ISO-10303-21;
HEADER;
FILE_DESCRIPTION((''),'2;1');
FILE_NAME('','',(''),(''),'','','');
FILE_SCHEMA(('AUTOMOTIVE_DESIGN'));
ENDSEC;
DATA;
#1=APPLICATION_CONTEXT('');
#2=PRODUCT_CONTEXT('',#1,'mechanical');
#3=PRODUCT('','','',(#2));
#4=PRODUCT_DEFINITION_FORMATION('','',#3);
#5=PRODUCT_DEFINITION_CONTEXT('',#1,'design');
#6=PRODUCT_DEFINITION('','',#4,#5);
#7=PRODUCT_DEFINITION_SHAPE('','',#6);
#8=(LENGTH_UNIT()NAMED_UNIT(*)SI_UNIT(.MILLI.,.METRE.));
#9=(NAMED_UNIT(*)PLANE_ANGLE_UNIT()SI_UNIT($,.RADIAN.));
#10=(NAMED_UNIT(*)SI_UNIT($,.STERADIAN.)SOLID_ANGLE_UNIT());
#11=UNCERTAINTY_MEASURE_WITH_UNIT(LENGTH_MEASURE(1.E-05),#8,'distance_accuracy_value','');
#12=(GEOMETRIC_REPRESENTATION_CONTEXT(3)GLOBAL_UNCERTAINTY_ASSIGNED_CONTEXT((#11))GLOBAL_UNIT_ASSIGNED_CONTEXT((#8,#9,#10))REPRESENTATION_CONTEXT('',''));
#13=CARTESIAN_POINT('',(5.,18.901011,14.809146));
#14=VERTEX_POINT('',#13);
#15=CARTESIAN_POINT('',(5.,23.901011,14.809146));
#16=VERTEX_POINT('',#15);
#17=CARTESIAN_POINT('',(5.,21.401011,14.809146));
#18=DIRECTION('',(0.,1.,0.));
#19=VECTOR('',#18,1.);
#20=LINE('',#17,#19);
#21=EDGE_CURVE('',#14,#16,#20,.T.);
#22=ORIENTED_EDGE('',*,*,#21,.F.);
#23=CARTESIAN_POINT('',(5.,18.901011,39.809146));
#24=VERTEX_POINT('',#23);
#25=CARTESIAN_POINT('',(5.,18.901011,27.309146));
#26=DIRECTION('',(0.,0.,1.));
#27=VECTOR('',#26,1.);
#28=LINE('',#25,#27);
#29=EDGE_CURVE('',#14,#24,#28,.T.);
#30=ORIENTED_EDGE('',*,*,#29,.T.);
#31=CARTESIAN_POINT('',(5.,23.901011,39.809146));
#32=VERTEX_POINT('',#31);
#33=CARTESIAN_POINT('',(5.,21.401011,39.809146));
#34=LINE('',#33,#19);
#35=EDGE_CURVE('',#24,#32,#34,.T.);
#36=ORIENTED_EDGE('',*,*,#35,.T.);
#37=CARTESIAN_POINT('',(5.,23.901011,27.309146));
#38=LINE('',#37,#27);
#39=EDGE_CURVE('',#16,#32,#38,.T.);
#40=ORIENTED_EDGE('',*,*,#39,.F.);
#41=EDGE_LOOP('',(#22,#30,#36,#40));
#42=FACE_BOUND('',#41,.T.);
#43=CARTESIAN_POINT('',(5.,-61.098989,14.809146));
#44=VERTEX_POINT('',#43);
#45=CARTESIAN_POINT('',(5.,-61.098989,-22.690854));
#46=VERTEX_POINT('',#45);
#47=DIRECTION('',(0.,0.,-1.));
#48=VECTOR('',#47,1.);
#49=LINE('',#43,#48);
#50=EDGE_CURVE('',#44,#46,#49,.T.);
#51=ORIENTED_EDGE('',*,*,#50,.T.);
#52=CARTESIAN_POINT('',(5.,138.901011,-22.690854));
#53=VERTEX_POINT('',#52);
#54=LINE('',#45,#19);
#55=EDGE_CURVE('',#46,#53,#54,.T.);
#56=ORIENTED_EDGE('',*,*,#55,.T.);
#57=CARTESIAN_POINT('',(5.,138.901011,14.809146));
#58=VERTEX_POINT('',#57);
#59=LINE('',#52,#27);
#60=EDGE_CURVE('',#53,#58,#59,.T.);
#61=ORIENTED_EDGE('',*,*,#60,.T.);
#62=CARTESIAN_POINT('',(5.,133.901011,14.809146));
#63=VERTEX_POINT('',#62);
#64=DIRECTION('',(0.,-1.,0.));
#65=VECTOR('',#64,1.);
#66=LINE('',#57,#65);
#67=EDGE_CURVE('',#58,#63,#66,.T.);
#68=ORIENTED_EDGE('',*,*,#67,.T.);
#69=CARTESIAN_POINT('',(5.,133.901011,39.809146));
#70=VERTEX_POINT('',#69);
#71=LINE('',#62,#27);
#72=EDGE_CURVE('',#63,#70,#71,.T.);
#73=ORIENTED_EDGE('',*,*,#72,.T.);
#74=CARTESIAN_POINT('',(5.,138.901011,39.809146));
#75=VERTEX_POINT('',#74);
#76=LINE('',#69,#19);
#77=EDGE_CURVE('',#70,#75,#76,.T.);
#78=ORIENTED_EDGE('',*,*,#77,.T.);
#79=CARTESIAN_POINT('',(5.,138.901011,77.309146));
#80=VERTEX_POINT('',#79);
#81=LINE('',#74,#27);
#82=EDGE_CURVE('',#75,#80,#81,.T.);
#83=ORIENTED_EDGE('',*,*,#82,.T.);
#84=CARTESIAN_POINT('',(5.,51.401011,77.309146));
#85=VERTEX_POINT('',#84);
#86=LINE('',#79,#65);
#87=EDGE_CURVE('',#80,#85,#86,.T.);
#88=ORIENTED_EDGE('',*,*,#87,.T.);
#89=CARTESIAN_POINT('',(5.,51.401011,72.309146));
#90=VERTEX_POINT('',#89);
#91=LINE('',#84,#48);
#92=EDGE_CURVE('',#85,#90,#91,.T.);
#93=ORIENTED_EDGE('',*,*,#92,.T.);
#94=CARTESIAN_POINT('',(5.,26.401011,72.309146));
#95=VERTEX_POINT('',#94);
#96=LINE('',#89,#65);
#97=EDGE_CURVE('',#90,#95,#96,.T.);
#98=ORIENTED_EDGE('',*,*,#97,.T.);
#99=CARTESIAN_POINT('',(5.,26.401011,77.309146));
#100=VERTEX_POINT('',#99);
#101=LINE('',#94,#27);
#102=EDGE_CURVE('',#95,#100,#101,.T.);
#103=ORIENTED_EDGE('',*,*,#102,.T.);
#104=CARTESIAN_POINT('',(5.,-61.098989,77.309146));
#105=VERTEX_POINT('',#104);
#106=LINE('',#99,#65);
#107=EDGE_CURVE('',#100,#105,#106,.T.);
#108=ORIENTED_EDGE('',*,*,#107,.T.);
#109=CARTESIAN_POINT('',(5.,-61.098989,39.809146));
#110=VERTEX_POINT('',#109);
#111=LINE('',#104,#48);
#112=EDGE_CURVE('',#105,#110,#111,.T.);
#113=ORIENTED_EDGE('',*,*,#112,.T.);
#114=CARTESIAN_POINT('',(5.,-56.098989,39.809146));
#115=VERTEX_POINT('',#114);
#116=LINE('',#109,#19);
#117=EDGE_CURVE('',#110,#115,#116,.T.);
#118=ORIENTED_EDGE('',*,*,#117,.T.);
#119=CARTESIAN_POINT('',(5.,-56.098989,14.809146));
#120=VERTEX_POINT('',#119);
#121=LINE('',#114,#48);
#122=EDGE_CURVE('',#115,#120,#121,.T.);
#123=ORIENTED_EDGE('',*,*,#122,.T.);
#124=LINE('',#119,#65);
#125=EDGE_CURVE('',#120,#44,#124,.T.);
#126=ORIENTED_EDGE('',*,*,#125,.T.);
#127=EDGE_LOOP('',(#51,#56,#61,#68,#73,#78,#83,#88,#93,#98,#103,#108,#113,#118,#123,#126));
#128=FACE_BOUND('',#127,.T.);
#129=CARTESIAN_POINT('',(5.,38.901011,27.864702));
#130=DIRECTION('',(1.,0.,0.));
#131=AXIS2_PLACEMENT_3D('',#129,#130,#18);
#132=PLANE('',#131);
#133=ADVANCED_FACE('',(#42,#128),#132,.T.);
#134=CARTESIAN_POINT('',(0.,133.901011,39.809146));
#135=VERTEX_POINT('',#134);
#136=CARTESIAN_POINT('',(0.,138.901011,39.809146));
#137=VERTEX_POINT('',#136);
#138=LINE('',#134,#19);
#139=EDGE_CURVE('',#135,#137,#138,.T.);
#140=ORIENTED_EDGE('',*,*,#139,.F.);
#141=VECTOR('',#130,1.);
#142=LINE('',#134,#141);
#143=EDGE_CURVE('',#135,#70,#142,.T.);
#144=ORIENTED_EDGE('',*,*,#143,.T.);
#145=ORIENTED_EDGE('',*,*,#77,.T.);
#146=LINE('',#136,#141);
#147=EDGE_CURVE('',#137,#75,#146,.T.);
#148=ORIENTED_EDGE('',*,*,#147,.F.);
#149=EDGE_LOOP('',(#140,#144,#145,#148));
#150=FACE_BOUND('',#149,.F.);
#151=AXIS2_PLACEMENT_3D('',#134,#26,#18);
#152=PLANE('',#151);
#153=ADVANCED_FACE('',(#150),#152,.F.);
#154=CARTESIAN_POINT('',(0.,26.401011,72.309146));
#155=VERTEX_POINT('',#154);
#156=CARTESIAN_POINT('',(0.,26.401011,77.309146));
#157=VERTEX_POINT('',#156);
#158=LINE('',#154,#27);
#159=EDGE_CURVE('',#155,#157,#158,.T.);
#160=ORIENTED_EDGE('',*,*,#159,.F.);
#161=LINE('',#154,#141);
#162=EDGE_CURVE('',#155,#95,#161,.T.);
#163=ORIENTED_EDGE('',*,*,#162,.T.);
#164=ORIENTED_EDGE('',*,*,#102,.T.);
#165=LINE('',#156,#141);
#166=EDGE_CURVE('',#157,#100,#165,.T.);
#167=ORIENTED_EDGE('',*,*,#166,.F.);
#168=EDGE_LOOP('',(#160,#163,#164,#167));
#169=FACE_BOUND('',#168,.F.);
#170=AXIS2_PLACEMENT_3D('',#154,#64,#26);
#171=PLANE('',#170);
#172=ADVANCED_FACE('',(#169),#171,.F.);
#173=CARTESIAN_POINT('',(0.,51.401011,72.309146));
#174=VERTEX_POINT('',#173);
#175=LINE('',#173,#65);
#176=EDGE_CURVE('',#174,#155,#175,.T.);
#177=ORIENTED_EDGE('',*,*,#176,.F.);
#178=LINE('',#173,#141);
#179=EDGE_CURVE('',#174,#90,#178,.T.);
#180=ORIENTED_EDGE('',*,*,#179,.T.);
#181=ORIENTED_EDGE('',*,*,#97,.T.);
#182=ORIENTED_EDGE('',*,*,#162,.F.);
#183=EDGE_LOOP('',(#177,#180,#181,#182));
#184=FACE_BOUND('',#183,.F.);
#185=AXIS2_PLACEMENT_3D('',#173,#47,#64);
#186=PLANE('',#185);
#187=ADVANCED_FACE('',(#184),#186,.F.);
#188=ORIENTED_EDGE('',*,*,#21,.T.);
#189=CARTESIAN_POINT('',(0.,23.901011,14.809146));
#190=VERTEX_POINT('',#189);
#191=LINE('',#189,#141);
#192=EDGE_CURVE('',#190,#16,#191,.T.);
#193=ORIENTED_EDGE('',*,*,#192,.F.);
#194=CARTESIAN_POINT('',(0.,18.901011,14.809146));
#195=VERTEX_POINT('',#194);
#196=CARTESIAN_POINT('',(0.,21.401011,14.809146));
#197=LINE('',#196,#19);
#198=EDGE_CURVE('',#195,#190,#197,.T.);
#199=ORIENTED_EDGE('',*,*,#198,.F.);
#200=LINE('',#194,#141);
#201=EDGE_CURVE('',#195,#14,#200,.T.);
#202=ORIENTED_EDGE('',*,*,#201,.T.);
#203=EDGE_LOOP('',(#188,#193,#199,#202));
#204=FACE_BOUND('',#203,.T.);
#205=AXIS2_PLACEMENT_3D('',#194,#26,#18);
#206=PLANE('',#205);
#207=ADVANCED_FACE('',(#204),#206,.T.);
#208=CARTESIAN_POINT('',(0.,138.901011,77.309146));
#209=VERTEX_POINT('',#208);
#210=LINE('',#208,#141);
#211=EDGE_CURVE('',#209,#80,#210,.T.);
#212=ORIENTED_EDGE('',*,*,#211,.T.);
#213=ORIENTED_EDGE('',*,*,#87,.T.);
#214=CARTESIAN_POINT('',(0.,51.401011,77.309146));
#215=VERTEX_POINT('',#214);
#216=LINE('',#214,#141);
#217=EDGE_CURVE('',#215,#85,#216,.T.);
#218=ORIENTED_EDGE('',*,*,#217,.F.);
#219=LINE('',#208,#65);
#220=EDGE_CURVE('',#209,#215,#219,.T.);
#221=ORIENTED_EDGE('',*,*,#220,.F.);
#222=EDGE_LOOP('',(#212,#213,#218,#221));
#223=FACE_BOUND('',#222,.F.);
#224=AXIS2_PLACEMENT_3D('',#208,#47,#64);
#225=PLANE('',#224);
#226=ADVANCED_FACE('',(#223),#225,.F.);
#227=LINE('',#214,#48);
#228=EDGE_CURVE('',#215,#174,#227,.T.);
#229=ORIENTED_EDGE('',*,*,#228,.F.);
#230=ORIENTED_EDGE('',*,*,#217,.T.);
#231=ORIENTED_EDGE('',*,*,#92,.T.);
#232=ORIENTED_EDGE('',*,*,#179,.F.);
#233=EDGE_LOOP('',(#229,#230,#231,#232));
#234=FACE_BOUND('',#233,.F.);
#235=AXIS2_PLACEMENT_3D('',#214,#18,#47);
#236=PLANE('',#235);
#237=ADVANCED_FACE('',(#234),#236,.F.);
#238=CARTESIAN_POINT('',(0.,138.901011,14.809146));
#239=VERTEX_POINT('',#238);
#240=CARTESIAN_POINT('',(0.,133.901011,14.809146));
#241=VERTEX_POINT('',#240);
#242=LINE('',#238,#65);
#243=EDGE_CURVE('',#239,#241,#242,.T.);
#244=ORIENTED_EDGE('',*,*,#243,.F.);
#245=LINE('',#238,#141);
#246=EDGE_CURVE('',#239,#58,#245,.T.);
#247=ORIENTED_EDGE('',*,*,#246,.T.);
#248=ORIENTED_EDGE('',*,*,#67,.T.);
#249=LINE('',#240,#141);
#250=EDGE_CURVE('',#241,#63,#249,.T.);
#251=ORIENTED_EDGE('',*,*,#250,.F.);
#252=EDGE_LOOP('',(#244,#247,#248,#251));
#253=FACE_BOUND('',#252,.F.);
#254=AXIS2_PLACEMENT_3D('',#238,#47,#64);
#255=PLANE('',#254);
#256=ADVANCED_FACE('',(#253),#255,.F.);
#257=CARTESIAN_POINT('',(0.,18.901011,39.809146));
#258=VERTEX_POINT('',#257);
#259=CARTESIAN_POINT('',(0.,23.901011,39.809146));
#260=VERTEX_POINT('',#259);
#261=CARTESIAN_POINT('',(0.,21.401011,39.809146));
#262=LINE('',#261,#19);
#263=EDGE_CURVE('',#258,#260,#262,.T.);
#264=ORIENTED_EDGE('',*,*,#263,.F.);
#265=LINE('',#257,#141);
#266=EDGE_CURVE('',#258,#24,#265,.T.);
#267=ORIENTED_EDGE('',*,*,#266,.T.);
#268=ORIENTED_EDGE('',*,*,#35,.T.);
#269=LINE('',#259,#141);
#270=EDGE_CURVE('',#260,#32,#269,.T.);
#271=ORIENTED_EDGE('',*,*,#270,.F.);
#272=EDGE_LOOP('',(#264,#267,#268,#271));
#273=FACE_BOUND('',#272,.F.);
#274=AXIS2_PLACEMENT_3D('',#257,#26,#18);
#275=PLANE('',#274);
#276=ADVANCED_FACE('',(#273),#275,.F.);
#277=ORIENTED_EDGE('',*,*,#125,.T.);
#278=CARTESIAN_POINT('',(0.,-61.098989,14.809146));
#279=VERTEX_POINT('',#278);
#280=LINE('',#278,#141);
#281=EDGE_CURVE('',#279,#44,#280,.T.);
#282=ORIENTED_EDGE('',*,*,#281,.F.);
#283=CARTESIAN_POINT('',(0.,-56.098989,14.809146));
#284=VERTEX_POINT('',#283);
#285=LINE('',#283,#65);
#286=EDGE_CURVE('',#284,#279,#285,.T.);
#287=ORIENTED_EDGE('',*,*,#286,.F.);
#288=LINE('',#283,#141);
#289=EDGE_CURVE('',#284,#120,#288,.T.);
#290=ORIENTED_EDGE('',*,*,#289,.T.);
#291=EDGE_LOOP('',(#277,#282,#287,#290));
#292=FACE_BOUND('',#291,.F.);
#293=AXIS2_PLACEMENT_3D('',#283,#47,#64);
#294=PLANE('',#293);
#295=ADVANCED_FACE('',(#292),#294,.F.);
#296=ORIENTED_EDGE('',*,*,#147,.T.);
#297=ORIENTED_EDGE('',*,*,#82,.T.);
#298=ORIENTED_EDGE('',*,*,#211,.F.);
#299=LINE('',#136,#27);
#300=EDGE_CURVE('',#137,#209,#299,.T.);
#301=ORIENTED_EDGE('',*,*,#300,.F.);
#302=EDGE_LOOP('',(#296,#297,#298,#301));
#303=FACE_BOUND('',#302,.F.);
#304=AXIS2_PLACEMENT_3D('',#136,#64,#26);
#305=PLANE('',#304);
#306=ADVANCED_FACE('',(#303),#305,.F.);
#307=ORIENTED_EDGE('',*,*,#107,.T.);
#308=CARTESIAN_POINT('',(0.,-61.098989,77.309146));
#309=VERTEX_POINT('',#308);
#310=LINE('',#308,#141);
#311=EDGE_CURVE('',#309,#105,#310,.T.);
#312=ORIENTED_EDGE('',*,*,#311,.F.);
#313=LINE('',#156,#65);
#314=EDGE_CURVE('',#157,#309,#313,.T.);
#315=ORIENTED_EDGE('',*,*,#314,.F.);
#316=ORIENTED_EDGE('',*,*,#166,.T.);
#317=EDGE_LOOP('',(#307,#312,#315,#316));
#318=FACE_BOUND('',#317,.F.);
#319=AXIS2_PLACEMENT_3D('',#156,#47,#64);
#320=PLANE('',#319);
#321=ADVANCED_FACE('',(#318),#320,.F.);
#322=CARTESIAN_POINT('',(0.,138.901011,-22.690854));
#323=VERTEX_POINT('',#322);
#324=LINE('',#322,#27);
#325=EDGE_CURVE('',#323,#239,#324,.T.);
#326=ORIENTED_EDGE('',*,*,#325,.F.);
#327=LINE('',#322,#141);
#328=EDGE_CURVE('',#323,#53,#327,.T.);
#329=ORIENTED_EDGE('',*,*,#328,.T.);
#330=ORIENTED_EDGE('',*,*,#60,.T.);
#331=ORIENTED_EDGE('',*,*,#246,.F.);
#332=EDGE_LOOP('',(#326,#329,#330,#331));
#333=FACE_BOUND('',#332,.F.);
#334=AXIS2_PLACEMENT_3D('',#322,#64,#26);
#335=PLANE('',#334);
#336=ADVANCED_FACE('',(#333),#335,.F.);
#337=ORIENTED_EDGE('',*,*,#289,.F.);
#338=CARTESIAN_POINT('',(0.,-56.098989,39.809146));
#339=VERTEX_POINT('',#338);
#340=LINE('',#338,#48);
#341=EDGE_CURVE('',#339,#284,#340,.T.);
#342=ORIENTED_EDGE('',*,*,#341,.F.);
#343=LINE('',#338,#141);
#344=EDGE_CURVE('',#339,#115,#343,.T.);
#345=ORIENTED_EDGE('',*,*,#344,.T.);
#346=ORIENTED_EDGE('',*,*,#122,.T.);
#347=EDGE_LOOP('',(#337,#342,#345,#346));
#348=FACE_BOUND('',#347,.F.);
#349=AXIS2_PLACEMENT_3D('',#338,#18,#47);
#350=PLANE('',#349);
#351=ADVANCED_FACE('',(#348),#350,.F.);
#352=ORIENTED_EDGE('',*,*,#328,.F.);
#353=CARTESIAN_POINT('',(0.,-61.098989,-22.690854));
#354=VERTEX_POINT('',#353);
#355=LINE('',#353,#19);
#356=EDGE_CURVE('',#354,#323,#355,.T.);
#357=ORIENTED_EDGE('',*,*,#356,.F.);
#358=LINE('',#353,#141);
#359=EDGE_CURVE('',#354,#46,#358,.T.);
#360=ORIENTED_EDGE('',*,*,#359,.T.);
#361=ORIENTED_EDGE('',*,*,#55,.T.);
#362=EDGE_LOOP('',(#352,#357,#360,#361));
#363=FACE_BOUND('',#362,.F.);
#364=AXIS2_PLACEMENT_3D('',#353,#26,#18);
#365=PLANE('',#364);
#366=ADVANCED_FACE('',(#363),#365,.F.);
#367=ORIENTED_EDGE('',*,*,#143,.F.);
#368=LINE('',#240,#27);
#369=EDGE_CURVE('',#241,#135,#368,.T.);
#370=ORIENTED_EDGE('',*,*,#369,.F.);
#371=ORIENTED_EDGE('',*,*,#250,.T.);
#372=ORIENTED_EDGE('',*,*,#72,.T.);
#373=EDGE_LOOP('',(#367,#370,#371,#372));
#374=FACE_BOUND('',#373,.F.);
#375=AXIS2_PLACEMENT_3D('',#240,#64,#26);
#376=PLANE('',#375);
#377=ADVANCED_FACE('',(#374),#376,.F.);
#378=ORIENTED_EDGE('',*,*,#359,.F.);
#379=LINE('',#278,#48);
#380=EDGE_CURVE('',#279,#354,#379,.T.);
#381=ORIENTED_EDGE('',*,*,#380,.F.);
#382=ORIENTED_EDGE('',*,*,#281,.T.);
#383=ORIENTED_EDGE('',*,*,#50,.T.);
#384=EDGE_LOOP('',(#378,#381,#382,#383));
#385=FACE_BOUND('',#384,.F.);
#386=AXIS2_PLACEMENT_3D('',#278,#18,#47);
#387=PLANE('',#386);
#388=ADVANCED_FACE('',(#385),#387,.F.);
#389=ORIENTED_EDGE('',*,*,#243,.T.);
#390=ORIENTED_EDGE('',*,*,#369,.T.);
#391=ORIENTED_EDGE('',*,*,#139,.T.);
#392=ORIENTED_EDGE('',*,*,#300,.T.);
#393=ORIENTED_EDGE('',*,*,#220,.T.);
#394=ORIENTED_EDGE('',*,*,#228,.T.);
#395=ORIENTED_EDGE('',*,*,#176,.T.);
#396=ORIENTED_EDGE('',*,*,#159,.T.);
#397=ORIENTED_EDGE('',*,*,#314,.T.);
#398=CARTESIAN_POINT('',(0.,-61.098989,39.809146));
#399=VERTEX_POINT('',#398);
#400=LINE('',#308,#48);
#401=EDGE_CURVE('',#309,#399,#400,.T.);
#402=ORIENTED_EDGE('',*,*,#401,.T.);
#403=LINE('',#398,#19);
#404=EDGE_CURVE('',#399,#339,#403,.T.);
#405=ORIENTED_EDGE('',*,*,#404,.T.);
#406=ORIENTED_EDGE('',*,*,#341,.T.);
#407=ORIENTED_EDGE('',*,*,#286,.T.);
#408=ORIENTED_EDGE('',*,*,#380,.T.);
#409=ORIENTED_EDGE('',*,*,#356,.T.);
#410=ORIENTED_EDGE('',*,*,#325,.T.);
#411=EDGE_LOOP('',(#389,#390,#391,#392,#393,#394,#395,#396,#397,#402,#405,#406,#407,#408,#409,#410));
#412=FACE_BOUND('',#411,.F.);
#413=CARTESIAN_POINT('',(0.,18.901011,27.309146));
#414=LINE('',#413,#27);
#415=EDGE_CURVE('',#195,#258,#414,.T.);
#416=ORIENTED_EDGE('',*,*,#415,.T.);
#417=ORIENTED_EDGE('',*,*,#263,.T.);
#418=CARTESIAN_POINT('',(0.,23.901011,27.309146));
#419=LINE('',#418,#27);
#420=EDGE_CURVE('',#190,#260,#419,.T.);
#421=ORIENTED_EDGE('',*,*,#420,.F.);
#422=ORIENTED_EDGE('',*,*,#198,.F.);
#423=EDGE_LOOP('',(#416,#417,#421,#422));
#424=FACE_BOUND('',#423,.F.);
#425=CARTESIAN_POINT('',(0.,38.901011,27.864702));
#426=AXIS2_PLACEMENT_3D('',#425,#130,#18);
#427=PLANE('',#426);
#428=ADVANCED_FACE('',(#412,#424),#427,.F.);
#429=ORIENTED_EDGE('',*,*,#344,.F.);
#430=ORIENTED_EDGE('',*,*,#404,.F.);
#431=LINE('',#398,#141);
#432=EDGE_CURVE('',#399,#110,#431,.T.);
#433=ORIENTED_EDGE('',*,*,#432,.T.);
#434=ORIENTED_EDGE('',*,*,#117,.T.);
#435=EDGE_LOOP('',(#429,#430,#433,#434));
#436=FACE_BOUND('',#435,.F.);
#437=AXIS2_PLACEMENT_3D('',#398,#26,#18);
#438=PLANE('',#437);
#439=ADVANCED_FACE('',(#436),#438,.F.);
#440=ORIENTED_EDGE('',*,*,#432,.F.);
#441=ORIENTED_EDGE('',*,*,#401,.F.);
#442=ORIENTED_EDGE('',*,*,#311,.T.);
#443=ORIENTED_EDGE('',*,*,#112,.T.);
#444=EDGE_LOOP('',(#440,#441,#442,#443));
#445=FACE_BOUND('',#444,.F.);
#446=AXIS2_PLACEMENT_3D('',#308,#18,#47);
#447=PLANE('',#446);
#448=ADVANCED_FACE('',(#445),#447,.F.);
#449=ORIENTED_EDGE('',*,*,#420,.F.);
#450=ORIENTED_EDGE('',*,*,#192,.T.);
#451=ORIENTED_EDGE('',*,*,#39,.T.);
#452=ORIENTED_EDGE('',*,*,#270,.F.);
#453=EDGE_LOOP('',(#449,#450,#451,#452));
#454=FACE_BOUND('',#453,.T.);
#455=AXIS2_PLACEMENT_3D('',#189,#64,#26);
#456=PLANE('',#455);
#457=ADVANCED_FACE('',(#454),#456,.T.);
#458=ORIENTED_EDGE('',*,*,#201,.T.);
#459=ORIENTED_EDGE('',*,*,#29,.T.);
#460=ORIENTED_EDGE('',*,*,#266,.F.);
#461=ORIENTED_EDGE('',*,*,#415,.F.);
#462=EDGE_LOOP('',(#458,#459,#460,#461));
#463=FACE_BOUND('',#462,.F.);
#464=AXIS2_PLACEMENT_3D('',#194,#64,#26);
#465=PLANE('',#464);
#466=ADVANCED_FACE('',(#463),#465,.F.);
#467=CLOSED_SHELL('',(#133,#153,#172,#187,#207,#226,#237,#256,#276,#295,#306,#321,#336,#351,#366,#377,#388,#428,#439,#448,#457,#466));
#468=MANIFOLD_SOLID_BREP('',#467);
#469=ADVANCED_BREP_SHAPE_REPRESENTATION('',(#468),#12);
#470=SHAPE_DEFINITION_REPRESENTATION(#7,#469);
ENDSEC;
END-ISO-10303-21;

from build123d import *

# Parameters (mm, degrees)
F0_W     = 5
F0_H     = 25
F1_DEPTH = 5


# Not quite as in the source:
# - a feature names something its author has since deleted; it is built from what else it names


with BuildPart() as f1:
    # F0 (on Right) → F1 (new body)
    with BuildSketch(Plane.YZ):
        Polygon((138.9010111106, 39.8091464203), (138.9010111106, 77.3091464203), (51.4010111106, 77.3091464203), (51.4010111106, 72.3091464203), (26.4010111106, 72.3091464203), (26.4010111106, 77.3091464203), (-61.0989888894, 77.3091464203), (-61.0989888894, 39.8091464203), (-56.0989888894, 39.8091464203), (-56.0989888894, 14.8091464203), (-61.0989888894, 14.8091464203), (-61.0989888894, -22.6908535797), (138.9010111106, -22.6908535797), (138.9010111106, 14.8091464203), (133.9010111106, 14.8091464203), (133.9010111106, 39.8091464203), align=None)
        with Locations((21.4010111106, 27.3091464203)):
            Rectangle(F0_W, F0_H, mode=Mode.SUBTRACT)
    extrude(amount=F1_DEPTH)


solid = f1.part
